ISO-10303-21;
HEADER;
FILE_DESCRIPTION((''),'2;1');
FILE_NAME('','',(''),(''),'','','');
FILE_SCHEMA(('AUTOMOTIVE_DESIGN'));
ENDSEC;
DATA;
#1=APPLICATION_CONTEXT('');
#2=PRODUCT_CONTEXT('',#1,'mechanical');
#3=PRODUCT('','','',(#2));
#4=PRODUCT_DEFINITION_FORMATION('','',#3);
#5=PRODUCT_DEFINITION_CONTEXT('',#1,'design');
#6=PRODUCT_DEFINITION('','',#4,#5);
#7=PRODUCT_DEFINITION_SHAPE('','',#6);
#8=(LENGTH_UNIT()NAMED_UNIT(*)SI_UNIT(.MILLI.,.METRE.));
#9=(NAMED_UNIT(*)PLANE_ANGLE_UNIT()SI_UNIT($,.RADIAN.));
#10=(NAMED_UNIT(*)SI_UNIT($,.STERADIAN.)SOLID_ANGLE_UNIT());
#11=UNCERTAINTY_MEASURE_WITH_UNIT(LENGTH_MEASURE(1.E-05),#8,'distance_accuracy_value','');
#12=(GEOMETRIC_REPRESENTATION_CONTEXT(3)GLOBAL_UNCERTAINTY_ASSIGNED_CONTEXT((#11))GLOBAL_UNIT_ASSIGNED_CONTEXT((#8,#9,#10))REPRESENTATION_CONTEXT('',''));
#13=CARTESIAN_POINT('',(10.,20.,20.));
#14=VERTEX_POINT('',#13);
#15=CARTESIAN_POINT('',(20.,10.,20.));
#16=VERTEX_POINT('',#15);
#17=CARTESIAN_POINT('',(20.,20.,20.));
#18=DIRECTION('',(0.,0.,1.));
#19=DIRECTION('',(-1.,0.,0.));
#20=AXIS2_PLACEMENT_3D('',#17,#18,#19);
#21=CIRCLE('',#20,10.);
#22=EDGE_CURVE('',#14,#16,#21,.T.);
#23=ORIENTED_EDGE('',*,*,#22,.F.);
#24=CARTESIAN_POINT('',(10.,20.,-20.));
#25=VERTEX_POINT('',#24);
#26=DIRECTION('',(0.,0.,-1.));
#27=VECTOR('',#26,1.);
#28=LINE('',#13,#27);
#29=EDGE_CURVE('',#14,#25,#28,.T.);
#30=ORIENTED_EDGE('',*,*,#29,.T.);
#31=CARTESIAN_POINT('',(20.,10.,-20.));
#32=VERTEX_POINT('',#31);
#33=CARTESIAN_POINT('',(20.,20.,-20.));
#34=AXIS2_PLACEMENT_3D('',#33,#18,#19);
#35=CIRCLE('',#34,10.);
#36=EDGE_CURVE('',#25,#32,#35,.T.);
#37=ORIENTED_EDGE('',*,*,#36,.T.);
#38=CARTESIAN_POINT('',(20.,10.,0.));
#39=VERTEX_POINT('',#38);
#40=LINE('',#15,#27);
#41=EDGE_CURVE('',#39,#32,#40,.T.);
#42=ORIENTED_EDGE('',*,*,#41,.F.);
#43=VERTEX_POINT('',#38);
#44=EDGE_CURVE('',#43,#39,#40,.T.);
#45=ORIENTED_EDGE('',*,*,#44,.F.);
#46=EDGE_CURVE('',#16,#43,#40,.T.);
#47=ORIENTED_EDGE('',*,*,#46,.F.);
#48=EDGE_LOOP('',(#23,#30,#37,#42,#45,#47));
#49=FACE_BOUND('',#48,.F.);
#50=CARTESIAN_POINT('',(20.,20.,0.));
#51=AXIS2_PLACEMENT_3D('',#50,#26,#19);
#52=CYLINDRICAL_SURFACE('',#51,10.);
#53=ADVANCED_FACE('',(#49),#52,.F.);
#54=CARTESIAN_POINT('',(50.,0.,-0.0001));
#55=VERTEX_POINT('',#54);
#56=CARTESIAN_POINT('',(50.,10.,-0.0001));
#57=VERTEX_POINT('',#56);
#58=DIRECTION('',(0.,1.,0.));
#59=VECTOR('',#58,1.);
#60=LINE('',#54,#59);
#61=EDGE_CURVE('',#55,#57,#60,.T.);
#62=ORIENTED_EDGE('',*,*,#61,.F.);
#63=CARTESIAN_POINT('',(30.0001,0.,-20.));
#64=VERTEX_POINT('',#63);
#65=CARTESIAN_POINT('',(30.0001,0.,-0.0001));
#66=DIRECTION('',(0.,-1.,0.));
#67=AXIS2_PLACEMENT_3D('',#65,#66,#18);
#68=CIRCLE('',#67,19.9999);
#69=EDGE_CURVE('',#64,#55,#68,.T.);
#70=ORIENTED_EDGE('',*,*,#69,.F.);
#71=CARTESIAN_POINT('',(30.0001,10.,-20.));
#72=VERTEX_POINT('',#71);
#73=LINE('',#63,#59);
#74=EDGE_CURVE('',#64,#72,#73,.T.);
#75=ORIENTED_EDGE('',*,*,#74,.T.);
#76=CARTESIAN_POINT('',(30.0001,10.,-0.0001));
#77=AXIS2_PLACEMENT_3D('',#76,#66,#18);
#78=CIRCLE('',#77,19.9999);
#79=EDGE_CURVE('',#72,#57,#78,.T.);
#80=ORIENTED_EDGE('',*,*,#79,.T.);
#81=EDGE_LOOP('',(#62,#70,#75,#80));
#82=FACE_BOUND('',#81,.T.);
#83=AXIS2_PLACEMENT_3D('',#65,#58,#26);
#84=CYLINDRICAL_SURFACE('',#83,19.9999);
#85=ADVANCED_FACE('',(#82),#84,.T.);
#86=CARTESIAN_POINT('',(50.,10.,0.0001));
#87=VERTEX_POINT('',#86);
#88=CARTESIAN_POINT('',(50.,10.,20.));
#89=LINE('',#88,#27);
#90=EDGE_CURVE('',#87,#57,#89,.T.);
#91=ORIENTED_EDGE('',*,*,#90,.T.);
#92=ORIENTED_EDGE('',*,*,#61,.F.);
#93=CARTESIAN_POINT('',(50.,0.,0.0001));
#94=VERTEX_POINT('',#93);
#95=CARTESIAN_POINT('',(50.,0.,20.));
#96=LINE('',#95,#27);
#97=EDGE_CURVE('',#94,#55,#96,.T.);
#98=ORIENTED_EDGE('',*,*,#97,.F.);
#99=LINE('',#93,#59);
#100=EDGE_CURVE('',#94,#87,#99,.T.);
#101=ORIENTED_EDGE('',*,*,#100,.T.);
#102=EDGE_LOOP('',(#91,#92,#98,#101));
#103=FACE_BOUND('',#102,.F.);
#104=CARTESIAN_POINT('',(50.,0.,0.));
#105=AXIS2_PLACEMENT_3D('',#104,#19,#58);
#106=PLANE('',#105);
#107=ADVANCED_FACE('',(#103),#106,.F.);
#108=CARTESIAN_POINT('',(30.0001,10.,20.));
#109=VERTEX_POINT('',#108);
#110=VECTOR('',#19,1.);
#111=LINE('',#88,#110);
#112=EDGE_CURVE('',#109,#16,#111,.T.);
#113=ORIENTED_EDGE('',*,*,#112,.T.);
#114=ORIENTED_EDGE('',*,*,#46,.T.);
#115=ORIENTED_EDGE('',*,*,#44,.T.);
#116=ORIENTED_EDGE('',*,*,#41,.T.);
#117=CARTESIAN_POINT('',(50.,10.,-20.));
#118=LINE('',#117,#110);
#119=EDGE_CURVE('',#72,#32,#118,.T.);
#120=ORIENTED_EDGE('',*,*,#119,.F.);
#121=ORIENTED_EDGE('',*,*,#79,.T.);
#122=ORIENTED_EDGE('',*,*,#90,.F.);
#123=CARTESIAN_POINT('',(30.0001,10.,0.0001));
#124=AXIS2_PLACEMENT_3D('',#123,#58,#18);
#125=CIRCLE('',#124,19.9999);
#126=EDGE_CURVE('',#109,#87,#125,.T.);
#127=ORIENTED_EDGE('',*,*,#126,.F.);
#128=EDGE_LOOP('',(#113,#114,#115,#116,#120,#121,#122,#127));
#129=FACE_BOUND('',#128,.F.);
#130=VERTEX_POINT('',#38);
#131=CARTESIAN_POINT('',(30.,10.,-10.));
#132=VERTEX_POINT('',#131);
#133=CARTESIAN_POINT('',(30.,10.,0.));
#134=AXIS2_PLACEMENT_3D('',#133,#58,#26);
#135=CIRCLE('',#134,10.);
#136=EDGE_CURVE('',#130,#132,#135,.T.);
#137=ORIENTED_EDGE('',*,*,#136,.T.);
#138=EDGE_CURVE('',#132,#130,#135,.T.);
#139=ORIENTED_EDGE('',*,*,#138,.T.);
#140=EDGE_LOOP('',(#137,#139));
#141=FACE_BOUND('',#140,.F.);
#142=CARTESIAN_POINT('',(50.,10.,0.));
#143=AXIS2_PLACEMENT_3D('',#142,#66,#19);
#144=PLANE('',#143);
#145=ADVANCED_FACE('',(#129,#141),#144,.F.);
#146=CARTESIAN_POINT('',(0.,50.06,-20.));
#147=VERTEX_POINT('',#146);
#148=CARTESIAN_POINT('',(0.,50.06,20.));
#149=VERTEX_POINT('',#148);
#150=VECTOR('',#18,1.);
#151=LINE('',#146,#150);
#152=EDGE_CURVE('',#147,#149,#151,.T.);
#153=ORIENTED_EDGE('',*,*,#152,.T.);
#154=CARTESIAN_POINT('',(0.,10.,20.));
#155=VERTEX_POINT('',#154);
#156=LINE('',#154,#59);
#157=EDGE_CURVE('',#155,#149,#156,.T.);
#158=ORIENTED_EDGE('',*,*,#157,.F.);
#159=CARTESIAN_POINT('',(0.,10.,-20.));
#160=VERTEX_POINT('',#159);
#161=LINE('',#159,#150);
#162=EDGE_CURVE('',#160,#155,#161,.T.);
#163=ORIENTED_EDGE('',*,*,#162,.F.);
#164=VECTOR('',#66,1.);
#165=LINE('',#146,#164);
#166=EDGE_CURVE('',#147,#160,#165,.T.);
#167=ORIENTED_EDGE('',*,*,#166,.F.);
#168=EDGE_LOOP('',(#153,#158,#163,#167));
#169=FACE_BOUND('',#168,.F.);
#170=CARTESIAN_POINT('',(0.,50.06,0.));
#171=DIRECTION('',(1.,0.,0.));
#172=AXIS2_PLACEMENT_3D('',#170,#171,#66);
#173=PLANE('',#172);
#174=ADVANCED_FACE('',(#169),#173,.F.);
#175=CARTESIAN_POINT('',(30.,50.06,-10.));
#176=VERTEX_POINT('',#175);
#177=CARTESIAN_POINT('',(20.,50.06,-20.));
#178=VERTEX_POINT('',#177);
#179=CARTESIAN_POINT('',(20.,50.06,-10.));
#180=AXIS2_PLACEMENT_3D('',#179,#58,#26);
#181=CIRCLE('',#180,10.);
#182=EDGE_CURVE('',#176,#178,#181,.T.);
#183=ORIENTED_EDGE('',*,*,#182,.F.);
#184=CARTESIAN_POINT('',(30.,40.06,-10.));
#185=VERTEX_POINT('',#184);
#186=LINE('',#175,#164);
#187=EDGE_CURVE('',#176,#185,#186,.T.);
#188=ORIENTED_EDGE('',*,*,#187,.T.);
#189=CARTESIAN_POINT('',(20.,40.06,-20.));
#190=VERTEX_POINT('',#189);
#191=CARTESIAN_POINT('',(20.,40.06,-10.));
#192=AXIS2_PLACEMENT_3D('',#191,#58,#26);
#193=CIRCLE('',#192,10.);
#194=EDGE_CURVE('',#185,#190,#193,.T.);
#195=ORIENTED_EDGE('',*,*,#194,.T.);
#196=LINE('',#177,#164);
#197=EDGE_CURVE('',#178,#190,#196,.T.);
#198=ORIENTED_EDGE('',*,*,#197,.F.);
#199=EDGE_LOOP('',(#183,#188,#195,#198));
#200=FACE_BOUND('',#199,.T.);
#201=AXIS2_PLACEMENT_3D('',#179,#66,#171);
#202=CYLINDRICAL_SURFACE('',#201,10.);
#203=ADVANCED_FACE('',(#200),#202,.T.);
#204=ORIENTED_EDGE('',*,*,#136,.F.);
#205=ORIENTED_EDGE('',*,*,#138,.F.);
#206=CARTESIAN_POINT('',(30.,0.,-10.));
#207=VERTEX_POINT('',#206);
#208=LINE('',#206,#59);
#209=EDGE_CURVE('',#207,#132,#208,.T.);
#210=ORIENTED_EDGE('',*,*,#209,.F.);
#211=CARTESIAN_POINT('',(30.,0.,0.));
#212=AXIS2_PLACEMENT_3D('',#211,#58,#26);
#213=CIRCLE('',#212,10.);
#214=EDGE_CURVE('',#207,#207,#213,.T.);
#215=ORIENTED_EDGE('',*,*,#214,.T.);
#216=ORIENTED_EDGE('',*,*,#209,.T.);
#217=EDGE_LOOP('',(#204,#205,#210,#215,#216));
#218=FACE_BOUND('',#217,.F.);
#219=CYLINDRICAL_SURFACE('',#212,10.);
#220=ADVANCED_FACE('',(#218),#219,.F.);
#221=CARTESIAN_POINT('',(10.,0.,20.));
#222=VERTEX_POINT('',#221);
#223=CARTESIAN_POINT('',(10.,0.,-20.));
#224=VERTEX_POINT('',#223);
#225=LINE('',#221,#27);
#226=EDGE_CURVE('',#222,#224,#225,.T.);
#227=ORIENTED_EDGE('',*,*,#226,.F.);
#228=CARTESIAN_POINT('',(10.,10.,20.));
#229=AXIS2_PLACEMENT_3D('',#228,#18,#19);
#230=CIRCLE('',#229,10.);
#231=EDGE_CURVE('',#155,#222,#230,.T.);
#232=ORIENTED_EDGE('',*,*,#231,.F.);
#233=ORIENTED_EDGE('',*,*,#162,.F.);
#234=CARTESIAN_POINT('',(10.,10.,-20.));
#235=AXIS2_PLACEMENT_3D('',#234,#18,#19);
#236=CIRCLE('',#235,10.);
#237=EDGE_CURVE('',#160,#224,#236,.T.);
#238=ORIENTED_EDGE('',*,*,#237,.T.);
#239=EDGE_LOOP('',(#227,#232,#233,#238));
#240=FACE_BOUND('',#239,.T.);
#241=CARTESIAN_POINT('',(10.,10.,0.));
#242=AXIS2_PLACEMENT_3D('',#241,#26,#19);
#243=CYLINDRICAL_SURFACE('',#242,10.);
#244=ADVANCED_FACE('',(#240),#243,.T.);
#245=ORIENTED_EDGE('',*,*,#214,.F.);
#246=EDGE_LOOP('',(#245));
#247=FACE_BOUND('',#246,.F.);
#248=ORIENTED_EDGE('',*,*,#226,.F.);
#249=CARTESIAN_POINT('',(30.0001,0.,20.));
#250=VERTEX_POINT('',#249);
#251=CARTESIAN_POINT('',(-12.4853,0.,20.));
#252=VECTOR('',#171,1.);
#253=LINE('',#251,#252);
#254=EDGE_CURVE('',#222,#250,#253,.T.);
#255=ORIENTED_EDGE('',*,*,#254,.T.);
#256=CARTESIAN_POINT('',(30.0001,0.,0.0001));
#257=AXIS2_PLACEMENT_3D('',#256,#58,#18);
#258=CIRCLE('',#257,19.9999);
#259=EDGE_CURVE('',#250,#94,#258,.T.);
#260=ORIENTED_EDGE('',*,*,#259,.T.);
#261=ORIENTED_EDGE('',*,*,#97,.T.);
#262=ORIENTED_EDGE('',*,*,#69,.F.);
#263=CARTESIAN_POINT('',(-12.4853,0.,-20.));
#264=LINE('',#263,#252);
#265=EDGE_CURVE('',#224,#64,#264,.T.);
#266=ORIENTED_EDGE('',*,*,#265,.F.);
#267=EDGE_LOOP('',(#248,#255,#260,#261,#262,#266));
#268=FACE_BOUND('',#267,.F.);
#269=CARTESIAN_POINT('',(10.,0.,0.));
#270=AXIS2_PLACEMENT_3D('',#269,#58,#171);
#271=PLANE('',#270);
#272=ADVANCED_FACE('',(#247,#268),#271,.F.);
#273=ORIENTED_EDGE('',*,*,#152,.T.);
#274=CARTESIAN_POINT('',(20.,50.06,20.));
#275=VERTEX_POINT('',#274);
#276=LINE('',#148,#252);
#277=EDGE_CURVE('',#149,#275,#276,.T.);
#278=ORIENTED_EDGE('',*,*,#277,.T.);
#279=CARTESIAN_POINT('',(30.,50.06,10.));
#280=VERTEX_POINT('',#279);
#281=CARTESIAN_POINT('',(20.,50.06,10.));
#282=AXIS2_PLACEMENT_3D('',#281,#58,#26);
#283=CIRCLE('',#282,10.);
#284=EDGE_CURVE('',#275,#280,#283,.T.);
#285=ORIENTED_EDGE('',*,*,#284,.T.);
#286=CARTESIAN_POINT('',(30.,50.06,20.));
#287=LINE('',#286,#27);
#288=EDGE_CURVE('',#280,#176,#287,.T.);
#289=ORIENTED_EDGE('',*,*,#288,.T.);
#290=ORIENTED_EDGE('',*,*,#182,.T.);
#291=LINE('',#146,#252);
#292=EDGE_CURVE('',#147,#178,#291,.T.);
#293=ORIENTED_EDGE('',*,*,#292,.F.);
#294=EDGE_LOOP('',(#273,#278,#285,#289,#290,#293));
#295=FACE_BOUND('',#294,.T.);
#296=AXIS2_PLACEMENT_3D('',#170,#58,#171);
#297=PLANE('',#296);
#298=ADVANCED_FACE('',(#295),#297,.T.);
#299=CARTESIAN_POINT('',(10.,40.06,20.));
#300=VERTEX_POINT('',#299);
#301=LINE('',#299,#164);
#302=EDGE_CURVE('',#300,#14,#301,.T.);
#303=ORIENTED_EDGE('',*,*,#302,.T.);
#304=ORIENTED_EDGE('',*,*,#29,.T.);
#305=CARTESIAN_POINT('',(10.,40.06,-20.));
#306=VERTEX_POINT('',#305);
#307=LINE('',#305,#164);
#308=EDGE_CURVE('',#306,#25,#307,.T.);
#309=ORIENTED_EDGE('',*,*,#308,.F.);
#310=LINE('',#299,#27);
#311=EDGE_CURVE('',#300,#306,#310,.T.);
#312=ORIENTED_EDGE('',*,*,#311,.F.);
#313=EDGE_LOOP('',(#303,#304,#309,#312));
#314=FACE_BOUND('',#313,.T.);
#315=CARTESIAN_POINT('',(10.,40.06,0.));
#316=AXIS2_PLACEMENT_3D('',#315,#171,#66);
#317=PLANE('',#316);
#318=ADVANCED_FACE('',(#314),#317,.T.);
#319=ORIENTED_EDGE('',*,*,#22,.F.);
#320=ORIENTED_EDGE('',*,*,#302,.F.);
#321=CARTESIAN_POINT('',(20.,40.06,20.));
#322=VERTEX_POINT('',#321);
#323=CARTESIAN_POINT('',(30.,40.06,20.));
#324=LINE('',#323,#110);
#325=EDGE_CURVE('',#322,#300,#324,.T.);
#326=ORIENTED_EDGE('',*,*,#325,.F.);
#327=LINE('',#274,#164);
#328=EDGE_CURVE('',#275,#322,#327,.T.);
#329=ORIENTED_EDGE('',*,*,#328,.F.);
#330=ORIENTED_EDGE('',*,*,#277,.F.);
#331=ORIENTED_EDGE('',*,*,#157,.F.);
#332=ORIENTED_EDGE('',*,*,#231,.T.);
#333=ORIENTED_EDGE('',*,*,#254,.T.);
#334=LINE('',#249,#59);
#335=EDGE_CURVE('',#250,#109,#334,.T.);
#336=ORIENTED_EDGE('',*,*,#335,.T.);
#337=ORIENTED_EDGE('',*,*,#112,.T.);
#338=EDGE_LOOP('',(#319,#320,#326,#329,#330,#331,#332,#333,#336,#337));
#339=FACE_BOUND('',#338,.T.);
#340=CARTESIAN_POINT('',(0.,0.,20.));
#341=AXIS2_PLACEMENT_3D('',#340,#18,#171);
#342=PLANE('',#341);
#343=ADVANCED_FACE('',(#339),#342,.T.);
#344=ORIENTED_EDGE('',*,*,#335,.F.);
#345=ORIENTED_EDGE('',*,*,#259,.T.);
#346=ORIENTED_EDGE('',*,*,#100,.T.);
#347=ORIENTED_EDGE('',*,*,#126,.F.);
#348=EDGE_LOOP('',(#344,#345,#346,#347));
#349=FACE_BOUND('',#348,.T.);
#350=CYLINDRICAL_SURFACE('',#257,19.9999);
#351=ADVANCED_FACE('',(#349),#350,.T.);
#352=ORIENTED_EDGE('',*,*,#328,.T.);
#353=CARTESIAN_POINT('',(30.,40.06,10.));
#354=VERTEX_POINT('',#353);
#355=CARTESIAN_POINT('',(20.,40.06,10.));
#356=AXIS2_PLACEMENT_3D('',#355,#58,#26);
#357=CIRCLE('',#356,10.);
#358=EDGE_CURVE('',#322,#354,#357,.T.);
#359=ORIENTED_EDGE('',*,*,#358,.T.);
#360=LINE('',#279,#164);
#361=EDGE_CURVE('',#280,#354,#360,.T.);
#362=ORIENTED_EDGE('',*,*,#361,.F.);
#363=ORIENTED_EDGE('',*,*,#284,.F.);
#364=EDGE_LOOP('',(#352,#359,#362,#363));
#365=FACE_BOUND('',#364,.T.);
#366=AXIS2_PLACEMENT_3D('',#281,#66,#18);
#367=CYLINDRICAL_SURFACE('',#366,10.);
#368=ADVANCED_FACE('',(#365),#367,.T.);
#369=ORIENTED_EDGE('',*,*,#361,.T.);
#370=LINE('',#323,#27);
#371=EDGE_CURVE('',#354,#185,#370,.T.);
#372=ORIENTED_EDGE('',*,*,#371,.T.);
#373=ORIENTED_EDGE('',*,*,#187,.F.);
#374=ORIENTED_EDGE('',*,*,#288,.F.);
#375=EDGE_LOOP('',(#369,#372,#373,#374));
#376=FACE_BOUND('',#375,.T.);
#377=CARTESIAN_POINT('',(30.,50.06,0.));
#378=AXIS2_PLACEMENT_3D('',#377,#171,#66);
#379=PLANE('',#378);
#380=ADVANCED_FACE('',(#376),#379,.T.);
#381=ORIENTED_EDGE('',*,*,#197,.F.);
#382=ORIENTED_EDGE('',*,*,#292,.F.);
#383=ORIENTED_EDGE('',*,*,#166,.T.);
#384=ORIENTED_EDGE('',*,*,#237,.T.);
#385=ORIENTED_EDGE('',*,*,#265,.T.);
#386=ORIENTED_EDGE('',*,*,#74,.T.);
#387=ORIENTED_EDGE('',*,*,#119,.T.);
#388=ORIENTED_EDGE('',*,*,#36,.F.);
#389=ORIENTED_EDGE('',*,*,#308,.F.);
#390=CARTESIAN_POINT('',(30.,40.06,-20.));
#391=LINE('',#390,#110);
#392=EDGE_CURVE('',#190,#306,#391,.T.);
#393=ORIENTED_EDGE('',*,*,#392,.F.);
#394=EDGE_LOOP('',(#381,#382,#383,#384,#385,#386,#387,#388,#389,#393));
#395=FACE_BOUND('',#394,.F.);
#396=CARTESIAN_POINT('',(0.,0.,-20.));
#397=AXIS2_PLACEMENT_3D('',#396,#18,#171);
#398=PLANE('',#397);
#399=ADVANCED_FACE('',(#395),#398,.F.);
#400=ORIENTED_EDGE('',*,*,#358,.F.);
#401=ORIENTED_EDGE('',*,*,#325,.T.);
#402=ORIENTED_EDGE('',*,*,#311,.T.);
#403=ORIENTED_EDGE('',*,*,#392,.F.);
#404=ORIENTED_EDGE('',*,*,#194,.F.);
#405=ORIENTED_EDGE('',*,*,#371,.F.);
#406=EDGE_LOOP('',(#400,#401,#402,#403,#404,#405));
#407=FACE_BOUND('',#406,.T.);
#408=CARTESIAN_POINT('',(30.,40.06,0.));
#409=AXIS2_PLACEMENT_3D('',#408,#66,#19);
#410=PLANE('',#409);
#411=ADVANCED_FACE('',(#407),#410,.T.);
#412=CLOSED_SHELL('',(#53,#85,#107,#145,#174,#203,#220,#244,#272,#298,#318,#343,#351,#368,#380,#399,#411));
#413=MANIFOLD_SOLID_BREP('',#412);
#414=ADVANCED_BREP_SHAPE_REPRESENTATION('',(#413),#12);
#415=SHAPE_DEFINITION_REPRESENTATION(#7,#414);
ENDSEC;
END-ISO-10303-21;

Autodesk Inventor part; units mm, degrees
ref_plane "YZ Plane" through (0, 0, 0) normal (1, 0, 0) x (0, 1, 0)
ref_plane "XZ Plane" through (0, 0, 0) normal (0, 1, 0) x (-1, 0, 0)
ref_plane "XY Plane" through (0, 0, 0) normal (0, 0, 1) x (1, 0, 0)
sketch "Sketch1" plane through (0, 0, 0) normal (0, 0, 1) x (1, 0, 0)
  line L0 (0, 60.4862) -> (0, -12.4973) projected
  line L1 (-12.4853, 0) -> (60.4142, 0) projected
  line L2 (0, 50.06) -> (30, 50.06)
  line L3 (30, 50.06) -> (30, 40.06)
  line L4 (30, 40.06) -> (10, 40.06)
  line L5 (0, 40.06) -> (0, 50.06)
  line L6 (10, 0) -> (50, 0)
  line L7 (50, 0) -> (50, 10)
  line L8 (50, 10) -> (20, 10)
  line L9 (0, 10) -> (0, 10)
  line L10 (10, 40.06) -> (10, 20)
  line L11 (0, 10) -> (0, 40.06)
  arc A0 (0, 10) -> (10, 0) centre (10, 10) ccw
  arc A1 (10, 20) -> (20, 10) centre (20, 20) ccw
  point P0 (0, 0)
  dimension "d0" = 30
  dimension "d2" = 50
  dimension "d3" = 10
  dimension "d5" = 10
  dimension "d6" = 10
extrude "Extrusion1" add sketch "Sketch1" along normal mid plane 40 contours L2 L3 L4 L10 A1 L8 L7 L1 A0 L0
fillet "Fillet1" radius 20 2 edges at (50, 5, 20) (50, 5, -20)
fillet "Fillet2" radius 10 2 edges at (30, 45.06, 20) (30, 45.06, -20)
sketch "Sketch2" plane through (10, 0, -20) normal (0, -1, 0) x (1, 0, 0)
  arc A0 (20, 0) -> (20, 40) centre (20, 20) ccw projected
  point P0 (-10, 20)
hole "Hole1" at (30, 0, 0) direction (0, 1, 0) diameter 20 depth 10
properties part number "Exercise_3"
